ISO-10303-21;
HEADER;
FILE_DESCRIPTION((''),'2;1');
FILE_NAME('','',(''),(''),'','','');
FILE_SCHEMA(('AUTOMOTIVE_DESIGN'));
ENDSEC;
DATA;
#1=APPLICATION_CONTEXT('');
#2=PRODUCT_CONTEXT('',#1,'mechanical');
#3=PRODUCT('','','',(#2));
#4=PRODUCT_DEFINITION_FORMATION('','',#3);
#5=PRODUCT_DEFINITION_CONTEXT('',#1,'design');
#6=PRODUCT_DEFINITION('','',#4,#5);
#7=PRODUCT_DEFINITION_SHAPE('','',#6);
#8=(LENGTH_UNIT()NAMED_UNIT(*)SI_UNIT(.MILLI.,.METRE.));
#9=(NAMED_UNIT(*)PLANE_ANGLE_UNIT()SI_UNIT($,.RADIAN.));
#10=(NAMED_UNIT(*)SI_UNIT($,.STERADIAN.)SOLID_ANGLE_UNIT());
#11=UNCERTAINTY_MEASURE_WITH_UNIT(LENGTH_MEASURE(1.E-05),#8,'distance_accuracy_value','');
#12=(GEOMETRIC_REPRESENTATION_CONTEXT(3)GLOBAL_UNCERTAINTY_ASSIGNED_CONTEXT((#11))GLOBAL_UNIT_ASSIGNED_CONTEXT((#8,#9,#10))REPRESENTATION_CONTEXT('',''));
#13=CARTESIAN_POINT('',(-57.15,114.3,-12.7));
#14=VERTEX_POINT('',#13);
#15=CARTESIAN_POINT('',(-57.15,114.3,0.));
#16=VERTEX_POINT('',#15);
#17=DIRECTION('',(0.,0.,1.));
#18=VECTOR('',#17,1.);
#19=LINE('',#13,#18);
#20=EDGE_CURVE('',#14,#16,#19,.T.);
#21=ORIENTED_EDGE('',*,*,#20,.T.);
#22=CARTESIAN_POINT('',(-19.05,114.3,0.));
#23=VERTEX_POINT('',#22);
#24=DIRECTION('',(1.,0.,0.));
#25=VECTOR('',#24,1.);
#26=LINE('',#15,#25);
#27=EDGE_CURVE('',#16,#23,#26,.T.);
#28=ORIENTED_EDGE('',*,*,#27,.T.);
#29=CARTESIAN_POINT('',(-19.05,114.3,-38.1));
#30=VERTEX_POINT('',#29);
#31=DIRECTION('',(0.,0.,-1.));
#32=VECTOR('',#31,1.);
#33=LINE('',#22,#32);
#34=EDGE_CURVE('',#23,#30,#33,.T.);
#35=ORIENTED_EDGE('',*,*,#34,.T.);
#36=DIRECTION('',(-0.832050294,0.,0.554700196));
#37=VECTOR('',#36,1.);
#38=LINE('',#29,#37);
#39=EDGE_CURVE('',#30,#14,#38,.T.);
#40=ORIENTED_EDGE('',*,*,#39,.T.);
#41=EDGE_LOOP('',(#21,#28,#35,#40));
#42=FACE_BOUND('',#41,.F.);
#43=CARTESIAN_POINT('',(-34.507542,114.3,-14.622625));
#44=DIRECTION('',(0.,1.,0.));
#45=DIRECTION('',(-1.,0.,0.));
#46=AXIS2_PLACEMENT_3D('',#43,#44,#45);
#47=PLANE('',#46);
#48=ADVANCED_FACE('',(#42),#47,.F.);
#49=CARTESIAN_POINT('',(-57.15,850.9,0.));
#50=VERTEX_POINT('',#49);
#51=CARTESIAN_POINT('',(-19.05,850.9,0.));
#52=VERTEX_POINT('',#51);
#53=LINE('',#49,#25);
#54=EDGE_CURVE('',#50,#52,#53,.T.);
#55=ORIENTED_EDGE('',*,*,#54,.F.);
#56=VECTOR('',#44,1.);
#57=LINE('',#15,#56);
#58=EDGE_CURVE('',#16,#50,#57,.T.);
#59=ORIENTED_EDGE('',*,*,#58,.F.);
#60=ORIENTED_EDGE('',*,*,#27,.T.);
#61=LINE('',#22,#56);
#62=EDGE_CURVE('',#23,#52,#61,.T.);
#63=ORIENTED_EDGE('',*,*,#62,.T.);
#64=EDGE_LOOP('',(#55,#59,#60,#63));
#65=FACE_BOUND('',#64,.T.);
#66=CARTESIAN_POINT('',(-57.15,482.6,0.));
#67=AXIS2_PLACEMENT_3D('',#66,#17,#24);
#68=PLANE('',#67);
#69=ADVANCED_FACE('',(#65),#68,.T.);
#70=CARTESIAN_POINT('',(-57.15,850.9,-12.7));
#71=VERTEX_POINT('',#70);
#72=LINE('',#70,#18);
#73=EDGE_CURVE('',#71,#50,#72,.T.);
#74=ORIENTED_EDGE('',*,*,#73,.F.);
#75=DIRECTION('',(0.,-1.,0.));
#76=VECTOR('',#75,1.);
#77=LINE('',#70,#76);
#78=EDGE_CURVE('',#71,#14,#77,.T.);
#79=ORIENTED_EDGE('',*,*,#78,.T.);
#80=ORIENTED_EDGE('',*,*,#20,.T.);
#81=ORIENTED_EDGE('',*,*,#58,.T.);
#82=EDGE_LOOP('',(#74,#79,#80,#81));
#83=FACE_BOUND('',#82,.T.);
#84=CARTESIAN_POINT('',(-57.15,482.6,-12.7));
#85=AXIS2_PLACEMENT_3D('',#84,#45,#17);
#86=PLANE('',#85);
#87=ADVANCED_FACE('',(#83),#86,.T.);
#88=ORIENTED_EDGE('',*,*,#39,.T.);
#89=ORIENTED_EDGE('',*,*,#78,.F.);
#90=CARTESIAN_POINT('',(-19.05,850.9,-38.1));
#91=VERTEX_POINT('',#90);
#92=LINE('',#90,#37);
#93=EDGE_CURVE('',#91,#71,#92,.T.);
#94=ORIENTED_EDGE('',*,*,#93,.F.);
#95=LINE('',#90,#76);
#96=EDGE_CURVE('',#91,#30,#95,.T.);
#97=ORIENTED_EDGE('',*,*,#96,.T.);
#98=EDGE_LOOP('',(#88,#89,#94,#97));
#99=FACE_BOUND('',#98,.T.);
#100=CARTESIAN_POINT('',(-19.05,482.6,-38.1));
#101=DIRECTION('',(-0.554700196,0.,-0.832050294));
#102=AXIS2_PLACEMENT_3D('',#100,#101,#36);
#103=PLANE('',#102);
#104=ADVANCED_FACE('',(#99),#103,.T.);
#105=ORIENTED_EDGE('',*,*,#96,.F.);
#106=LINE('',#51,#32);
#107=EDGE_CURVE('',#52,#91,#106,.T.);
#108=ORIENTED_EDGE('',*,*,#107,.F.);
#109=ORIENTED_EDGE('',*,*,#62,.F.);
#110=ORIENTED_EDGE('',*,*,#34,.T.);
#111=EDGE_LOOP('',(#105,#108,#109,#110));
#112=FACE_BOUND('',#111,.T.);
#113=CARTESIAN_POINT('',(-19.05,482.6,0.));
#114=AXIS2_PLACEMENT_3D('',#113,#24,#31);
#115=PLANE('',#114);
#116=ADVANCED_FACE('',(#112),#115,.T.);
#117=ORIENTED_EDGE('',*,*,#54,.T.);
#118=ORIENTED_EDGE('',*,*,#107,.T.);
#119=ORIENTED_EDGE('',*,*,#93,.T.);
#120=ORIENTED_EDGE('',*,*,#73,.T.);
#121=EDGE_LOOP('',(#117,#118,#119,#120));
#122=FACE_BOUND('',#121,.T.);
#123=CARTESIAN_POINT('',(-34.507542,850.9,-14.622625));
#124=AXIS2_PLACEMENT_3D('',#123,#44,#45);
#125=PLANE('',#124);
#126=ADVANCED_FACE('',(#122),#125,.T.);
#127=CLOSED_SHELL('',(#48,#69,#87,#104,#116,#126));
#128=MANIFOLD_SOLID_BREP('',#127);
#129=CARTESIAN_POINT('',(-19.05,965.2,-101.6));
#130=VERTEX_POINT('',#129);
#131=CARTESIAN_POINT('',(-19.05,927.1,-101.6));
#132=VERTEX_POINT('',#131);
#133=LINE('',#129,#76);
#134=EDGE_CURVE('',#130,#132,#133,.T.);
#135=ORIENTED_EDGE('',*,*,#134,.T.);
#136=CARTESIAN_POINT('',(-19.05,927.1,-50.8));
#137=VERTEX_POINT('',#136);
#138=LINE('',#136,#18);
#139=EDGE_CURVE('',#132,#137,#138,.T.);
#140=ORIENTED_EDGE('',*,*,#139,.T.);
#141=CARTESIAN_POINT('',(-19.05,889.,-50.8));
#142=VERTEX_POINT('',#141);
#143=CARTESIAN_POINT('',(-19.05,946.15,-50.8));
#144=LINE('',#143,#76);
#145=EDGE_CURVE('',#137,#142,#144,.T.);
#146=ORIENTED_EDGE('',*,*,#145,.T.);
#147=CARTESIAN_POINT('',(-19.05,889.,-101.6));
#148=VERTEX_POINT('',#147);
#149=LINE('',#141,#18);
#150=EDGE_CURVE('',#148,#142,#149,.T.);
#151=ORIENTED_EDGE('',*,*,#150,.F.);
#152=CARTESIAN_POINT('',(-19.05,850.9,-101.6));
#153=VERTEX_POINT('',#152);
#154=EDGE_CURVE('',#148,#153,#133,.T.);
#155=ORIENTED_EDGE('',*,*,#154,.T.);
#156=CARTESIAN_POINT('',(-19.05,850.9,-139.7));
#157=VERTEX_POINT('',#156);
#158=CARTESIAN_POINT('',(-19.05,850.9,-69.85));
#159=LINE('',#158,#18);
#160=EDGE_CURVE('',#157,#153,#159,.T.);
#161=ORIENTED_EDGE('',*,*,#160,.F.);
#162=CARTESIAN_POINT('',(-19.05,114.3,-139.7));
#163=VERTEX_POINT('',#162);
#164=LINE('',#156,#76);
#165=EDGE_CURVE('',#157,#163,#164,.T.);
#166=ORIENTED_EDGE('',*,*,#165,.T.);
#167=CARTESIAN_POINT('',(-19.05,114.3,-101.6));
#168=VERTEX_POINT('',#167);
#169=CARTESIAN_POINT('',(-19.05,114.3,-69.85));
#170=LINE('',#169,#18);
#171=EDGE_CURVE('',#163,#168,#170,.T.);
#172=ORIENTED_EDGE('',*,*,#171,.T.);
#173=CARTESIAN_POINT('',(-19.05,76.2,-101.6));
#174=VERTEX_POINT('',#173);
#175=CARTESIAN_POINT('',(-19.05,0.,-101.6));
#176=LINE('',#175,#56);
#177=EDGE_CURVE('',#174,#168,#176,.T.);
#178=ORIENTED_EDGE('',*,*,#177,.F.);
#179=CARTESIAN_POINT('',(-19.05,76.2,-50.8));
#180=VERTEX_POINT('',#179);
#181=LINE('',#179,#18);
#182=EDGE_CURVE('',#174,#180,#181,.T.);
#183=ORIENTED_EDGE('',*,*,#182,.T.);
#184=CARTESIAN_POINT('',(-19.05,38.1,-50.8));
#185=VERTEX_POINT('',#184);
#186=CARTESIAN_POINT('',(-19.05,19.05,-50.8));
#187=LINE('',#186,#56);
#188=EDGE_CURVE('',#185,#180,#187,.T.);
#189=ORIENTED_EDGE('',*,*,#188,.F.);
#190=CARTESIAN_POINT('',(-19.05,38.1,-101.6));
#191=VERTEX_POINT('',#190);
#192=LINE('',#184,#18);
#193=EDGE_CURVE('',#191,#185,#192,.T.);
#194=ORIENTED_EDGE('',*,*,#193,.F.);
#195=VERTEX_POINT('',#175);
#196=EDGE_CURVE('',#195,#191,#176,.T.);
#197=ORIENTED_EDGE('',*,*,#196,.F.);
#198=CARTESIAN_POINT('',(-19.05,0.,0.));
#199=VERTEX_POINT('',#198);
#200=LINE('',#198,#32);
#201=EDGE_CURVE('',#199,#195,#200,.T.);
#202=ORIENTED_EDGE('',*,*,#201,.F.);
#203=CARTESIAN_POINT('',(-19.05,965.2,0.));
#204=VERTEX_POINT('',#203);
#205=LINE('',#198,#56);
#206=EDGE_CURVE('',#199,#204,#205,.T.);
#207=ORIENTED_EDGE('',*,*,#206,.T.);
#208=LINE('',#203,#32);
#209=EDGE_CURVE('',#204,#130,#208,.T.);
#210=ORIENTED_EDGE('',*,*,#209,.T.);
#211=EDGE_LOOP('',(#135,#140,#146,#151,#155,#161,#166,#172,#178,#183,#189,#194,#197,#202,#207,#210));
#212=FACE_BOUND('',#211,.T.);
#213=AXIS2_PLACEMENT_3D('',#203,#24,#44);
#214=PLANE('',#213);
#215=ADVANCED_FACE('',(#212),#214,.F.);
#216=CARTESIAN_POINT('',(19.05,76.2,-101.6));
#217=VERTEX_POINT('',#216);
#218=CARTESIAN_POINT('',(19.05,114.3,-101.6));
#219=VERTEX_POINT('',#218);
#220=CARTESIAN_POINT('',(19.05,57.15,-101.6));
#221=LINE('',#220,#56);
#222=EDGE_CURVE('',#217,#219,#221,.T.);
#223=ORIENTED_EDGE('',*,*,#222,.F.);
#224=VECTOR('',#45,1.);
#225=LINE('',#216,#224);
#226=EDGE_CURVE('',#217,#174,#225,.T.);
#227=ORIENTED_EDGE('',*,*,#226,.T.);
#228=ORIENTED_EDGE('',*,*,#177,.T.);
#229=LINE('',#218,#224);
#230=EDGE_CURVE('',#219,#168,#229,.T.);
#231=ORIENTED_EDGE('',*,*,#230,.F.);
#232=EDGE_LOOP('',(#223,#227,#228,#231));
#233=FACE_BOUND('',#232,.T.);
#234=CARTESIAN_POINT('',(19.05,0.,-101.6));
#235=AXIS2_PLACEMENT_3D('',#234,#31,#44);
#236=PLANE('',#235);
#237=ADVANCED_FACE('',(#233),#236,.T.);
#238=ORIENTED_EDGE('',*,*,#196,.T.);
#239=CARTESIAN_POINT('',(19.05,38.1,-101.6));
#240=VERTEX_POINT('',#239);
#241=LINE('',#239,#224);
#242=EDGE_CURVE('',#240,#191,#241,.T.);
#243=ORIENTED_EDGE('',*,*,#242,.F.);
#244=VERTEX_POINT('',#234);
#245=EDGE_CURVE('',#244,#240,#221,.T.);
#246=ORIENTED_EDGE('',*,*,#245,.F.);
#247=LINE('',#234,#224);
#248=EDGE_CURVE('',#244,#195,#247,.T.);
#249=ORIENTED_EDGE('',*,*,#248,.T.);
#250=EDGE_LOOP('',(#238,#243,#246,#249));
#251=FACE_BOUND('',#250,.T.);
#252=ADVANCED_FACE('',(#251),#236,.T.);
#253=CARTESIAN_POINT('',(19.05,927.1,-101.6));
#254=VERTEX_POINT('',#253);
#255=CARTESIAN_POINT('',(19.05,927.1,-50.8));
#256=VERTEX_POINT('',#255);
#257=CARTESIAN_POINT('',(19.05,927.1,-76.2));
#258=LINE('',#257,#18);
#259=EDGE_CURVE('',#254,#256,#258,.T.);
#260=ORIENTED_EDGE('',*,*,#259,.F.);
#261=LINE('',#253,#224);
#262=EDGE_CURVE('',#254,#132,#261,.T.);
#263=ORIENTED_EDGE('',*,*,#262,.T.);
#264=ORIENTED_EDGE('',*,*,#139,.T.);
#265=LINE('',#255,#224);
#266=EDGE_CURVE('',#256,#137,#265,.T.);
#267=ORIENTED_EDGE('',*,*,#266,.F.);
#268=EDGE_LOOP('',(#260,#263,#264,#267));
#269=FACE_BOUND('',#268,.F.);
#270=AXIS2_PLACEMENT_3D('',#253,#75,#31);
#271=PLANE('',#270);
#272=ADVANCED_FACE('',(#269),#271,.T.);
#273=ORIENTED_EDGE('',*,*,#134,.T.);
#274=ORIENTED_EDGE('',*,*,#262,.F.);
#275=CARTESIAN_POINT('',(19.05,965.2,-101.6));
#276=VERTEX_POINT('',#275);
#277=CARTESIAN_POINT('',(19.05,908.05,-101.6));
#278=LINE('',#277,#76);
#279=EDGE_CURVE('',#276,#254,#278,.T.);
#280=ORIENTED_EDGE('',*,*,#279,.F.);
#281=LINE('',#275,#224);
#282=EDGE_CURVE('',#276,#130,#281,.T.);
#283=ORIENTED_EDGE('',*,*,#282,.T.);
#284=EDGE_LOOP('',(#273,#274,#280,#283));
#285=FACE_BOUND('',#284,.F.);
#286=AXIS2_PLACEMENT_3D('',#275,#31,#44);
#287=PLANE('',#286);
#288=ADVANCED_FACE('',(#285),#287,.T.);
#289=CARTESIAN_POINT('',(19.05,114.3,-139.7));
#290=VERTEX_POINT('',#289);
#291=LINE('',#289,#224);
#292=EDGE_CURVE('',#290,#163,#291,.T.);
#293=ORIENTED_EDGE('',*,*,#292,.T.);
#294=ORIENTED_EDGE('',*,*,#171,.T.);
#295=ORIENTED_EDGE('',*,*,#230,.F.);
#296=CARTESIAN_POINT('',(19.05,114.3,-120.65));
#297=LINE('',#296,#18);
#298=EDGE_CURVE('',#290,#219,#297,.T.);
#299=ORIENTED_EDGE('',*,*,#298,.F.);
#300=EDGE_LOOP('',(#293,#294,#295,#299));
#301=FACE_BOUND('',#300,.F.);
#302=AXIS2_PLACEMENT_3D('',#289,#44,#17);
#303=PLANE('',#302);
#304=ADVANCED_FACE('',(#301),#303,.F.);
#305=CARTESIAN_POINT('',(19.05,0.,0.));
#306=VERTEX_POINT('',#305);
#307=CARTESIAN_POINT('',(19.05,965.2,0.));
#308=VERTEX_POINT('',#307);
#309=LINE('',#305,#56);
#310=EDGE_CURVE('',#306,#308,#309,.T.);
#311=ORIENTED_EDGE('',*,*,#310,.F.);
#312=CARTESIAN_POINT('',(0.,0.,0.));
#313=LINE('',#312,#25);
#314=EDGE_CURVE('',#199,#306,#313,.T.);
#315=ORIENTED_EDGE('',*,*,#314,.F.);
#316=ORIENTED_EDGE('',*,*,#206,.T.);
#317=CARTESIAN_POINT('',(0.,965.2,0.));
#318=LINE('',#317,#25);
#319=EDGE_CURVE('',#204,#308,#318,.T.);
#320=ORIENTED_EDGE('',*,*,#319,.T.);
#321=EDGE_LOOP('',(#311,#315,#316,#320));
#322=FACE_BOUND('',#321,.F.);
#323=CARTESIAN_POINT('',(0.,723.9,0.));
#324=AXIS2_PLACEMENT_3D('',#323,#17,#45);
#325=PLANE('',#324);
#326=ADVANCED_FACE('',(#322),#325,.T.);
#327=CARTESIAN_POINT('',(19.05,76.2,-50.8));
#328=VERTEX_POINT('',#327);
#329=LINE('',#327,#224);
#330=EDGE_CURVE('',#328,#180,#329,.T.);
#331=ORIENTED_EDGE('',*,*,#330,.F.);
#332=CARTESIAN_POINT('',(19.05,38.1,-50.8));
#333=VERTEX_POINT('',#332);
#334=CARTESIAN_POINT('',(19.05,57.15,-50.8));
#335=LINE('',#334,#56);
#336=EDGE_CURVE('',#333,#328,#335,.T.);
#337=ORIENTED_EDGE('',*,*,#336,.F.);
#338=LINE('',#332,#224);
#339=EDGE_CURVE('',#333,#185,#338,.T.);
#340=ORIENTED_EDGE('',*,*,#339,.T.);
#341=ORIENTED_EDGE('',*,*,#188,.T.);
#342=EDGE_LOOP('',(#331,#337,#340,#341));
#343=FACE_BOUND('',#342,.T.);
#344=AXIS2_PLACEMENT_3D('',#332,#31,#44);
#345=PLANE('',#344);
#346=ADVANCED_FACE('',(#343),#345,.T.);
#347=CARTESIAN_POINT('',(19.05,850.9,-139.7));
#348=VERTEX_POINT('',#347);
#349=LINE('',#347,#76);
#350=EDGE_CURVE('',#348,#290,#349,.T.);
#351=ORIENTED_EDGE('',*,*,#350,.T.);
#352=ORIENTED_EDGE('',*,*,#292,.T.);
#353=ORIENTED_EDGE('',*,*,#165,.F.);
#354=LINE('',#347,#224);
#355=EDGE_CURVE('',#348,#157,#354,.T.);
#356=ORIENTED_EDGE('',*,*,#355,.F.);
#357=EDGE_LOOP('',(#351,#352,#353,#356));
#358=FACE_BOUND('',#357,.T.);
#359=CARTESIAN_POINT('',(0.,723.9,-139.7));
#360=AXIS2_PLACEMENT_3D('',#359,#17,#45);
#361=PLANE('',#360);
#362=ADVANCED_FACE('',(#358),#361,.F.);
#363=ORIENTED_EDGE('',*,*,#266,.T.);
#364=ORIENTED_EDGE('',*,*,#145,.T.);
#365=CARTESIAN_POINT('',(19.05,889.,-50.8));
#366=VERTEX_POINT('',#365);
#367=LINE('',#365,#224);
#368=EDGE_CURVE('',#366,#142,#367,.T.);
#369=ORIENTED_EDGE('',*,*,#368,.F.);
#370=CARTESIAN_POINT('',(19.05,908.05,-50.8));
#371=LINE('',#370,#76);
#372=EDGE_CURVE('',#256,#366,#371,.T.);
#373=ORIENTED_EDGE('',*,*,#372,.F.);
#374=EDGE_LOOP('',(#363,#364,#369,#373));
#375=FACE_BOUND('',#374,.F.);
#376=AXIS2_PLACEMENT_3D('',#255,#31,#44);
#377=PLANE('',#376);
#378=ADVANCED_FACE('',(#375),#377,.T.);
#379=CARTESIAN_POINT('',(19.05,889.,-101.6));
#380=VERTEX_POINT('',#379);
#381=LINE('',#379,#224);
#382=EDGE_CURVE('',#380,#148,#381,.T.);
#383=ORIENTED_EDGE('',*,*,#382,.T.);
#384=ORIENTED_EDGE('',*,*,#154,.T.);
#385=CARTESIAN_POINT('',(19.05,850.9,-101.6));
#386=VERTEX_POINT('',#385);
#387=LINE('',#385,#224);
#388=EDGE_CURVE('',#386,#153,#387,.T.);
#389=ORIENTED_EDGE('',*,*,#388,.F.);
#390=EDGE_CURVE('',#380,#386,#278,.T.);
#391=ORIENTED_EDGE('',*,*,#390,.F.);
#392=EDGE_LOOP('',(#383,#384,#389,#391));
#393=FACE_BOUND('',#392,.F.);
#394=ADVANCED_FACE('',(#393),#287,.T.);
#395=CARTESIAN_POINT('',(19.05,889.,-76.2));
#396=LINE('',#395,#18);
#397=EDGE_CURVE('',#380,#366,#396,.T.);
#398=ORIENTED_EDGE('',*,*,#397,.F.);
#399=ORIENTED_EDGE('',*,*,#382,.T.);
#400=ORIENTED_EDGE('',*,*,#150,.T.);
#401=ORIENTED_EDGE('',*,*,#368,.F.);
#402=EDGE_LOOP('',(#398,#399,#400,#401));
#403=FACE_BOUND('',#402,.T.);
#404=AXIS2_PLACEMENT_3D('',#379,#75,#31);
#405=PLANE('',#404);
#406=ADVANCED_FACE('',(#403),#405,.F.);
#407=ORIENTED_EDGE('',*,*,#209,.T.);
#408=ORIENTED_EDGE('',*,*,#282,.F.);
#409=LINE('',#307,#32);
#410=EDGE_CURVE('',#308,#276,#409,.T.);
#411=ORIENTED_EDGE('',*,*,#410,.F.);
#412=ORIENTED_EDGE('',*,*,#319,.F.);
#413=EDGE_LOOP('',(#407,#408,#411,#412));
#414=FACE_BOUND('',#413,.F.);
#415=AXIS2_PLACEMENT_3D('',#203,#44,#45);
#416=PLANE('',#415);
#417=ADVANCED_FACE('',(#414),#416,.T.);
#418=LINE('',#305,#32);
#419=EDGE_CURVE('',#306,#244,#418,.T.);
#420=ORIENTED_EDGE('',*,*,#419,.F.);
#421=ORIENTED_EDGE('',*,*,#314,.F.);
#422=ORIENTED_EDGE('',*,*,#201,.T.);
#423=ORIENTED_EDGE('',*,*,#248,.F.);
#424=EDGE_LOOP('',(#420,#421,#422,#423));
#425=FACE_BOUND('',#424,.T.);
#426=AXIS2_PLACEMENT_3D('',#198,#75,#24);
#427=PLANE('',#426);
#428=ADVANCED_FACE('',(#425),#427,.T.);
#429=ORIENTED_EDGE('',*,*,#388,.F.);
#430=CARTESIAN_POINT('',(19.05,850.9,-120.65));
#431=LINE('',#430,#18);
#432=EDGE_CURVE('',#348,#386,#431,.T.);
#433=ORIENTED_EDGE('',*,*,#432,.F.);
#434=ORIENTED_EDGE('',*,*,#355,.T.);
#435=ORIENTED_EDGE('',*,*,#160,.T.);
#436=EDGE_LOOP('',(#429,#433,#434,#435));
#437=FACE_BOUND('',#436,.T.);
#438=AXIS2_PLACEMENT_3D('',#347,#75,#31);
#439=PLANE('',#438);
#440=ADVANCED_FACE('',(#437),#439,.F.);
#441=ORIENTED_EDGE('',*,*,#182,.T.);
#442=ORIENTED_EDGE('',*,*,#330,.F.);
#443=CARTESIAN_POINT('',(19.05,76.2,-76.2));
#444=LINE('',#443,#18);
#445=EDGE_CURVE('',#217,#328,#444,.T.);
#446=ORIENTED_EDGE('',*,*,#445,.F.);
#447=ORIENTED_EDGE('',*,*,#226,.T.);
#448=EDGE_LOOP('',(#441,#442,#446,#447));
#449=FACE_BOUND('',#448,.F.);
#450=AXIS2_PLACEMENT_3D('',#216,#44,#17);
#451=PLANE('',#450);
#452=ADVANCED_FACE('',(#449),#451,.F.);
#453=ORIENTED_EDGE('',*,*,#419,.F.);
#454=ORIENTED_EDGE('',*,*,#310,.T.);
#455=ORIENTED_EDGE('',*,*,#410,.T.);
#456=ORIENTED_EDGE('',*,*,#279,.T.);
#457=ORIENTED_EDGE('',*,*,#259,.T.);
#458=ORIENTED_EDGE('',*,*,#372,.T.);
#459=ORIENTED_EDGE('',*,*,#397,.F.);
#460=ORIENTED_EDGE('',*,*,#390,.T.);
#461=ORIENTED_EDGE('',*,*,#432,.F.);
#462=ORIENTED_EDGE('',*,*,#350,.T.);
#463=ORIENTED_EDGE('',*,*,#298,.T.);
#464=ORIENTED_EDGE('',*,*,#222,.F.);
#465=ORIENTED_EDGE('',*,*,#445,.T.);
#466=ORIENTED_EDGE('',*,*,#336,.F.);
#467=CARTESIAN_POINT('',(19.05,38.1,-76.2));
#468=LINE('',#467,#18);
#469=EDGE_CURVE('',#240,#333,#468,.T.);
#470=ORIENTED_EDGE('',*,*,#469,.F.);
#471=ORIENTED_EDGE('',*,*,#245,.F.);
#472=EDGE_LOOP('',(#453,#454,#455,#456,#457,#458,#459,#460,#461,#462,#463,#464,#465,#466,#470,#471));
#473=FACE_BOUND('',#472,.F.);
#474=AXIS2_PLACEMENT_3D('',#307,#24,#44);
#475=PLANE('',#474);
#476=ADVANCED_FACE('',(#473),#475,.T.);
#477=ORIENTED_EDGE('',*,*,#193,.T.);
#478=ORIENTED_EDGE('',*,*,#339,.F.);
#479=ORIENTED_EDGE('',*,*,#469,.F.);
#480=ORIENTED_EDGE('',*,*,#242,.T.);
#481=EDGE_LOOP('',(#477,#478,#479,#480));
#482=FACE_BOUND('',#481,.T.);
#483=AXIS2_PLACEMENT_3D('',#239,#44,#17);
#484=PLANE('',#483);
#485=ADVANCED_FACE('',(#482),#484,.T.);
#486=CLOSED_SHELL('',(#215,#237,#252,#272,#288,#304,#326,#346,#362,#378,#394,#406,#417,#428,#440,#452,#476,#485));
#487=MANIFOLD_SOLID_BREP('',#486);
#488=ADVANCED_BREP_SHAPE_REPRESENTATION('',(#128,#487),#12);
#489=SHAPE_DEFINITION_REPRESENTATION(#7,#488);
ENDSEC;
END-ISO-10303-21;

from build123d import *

# Parameters (mm, degrees)
F0_W          = 38.1
F0_H          = 482.6
F1_DEPTH      = 139.7
F2_W          = 114.3
F2_H          = 38.1
F3_DEPTH      = 38.101
F4_W          = 38.1
F4_H          = 50.8
F5_DEPTH      = 38.101
F9_DEPTH      = 368.3
F9_DEPTH_BACK = 368.3


# Not quite as in the source:
# - a feature names something its author has since deleted; it is built from what else it names


with BuildPart() as f1:
    # F0 (on Top) → F1 (new body)
    with BuildSketch(Plane.XY):
        with Locations((0, 241.3)):
            Rectangle(F0_W, F0_H)
    extrude(amount=-F1_DEPTH)

    # F2 (on face) → F3 (cut, through all)
    with BuildSketch(Plane.YZ.offset(19.05)):
        with Locations((57.15, -120.65)):
            Rectangle(F2_W, F2_H)
    extrude(amount=-F3_DEPTH, mode=Mode.SUBTRACT)

    # F4 (on face) → F5 (cut, through all)
    with BuildSketch(Plane.YZ.offset(19.05)):
        with Locations((57.15, -76.2)):
            Rectangle(F4_W, F4_H)
    extrude(amount=-F5_DEPTH, mode=Mode.SUBTRACT)

    # F7: F1 across plane


with BuildPart() as f1_1:
    add(f1.part)
    add(f1.part.mirror(Plane(origin=(0, 482.6, -69.85), x_dir=(-1, 0, 0), z_dir=(0, 1, 0))))


with BuildPart() as f9:
    # F8 (on offset) → F9 (new body, two sides)
    with BuildSketch(Plane(origin=(0, 482.6, 0), x_dir=(-1, 0, 0), z_dir=(0, 1, 0))) as f9_sk:
        Polygon((57.15, -12.7), (57.15, 0), (19.05, 0), (19.05, -38.1), align=None)
    extrude(amount=F9_DEPTH)
    extrude(f9_sk.sketch, amount=-F9_DEPTH_BACK)


solid = Compound([f1_1.part, f9.part])
